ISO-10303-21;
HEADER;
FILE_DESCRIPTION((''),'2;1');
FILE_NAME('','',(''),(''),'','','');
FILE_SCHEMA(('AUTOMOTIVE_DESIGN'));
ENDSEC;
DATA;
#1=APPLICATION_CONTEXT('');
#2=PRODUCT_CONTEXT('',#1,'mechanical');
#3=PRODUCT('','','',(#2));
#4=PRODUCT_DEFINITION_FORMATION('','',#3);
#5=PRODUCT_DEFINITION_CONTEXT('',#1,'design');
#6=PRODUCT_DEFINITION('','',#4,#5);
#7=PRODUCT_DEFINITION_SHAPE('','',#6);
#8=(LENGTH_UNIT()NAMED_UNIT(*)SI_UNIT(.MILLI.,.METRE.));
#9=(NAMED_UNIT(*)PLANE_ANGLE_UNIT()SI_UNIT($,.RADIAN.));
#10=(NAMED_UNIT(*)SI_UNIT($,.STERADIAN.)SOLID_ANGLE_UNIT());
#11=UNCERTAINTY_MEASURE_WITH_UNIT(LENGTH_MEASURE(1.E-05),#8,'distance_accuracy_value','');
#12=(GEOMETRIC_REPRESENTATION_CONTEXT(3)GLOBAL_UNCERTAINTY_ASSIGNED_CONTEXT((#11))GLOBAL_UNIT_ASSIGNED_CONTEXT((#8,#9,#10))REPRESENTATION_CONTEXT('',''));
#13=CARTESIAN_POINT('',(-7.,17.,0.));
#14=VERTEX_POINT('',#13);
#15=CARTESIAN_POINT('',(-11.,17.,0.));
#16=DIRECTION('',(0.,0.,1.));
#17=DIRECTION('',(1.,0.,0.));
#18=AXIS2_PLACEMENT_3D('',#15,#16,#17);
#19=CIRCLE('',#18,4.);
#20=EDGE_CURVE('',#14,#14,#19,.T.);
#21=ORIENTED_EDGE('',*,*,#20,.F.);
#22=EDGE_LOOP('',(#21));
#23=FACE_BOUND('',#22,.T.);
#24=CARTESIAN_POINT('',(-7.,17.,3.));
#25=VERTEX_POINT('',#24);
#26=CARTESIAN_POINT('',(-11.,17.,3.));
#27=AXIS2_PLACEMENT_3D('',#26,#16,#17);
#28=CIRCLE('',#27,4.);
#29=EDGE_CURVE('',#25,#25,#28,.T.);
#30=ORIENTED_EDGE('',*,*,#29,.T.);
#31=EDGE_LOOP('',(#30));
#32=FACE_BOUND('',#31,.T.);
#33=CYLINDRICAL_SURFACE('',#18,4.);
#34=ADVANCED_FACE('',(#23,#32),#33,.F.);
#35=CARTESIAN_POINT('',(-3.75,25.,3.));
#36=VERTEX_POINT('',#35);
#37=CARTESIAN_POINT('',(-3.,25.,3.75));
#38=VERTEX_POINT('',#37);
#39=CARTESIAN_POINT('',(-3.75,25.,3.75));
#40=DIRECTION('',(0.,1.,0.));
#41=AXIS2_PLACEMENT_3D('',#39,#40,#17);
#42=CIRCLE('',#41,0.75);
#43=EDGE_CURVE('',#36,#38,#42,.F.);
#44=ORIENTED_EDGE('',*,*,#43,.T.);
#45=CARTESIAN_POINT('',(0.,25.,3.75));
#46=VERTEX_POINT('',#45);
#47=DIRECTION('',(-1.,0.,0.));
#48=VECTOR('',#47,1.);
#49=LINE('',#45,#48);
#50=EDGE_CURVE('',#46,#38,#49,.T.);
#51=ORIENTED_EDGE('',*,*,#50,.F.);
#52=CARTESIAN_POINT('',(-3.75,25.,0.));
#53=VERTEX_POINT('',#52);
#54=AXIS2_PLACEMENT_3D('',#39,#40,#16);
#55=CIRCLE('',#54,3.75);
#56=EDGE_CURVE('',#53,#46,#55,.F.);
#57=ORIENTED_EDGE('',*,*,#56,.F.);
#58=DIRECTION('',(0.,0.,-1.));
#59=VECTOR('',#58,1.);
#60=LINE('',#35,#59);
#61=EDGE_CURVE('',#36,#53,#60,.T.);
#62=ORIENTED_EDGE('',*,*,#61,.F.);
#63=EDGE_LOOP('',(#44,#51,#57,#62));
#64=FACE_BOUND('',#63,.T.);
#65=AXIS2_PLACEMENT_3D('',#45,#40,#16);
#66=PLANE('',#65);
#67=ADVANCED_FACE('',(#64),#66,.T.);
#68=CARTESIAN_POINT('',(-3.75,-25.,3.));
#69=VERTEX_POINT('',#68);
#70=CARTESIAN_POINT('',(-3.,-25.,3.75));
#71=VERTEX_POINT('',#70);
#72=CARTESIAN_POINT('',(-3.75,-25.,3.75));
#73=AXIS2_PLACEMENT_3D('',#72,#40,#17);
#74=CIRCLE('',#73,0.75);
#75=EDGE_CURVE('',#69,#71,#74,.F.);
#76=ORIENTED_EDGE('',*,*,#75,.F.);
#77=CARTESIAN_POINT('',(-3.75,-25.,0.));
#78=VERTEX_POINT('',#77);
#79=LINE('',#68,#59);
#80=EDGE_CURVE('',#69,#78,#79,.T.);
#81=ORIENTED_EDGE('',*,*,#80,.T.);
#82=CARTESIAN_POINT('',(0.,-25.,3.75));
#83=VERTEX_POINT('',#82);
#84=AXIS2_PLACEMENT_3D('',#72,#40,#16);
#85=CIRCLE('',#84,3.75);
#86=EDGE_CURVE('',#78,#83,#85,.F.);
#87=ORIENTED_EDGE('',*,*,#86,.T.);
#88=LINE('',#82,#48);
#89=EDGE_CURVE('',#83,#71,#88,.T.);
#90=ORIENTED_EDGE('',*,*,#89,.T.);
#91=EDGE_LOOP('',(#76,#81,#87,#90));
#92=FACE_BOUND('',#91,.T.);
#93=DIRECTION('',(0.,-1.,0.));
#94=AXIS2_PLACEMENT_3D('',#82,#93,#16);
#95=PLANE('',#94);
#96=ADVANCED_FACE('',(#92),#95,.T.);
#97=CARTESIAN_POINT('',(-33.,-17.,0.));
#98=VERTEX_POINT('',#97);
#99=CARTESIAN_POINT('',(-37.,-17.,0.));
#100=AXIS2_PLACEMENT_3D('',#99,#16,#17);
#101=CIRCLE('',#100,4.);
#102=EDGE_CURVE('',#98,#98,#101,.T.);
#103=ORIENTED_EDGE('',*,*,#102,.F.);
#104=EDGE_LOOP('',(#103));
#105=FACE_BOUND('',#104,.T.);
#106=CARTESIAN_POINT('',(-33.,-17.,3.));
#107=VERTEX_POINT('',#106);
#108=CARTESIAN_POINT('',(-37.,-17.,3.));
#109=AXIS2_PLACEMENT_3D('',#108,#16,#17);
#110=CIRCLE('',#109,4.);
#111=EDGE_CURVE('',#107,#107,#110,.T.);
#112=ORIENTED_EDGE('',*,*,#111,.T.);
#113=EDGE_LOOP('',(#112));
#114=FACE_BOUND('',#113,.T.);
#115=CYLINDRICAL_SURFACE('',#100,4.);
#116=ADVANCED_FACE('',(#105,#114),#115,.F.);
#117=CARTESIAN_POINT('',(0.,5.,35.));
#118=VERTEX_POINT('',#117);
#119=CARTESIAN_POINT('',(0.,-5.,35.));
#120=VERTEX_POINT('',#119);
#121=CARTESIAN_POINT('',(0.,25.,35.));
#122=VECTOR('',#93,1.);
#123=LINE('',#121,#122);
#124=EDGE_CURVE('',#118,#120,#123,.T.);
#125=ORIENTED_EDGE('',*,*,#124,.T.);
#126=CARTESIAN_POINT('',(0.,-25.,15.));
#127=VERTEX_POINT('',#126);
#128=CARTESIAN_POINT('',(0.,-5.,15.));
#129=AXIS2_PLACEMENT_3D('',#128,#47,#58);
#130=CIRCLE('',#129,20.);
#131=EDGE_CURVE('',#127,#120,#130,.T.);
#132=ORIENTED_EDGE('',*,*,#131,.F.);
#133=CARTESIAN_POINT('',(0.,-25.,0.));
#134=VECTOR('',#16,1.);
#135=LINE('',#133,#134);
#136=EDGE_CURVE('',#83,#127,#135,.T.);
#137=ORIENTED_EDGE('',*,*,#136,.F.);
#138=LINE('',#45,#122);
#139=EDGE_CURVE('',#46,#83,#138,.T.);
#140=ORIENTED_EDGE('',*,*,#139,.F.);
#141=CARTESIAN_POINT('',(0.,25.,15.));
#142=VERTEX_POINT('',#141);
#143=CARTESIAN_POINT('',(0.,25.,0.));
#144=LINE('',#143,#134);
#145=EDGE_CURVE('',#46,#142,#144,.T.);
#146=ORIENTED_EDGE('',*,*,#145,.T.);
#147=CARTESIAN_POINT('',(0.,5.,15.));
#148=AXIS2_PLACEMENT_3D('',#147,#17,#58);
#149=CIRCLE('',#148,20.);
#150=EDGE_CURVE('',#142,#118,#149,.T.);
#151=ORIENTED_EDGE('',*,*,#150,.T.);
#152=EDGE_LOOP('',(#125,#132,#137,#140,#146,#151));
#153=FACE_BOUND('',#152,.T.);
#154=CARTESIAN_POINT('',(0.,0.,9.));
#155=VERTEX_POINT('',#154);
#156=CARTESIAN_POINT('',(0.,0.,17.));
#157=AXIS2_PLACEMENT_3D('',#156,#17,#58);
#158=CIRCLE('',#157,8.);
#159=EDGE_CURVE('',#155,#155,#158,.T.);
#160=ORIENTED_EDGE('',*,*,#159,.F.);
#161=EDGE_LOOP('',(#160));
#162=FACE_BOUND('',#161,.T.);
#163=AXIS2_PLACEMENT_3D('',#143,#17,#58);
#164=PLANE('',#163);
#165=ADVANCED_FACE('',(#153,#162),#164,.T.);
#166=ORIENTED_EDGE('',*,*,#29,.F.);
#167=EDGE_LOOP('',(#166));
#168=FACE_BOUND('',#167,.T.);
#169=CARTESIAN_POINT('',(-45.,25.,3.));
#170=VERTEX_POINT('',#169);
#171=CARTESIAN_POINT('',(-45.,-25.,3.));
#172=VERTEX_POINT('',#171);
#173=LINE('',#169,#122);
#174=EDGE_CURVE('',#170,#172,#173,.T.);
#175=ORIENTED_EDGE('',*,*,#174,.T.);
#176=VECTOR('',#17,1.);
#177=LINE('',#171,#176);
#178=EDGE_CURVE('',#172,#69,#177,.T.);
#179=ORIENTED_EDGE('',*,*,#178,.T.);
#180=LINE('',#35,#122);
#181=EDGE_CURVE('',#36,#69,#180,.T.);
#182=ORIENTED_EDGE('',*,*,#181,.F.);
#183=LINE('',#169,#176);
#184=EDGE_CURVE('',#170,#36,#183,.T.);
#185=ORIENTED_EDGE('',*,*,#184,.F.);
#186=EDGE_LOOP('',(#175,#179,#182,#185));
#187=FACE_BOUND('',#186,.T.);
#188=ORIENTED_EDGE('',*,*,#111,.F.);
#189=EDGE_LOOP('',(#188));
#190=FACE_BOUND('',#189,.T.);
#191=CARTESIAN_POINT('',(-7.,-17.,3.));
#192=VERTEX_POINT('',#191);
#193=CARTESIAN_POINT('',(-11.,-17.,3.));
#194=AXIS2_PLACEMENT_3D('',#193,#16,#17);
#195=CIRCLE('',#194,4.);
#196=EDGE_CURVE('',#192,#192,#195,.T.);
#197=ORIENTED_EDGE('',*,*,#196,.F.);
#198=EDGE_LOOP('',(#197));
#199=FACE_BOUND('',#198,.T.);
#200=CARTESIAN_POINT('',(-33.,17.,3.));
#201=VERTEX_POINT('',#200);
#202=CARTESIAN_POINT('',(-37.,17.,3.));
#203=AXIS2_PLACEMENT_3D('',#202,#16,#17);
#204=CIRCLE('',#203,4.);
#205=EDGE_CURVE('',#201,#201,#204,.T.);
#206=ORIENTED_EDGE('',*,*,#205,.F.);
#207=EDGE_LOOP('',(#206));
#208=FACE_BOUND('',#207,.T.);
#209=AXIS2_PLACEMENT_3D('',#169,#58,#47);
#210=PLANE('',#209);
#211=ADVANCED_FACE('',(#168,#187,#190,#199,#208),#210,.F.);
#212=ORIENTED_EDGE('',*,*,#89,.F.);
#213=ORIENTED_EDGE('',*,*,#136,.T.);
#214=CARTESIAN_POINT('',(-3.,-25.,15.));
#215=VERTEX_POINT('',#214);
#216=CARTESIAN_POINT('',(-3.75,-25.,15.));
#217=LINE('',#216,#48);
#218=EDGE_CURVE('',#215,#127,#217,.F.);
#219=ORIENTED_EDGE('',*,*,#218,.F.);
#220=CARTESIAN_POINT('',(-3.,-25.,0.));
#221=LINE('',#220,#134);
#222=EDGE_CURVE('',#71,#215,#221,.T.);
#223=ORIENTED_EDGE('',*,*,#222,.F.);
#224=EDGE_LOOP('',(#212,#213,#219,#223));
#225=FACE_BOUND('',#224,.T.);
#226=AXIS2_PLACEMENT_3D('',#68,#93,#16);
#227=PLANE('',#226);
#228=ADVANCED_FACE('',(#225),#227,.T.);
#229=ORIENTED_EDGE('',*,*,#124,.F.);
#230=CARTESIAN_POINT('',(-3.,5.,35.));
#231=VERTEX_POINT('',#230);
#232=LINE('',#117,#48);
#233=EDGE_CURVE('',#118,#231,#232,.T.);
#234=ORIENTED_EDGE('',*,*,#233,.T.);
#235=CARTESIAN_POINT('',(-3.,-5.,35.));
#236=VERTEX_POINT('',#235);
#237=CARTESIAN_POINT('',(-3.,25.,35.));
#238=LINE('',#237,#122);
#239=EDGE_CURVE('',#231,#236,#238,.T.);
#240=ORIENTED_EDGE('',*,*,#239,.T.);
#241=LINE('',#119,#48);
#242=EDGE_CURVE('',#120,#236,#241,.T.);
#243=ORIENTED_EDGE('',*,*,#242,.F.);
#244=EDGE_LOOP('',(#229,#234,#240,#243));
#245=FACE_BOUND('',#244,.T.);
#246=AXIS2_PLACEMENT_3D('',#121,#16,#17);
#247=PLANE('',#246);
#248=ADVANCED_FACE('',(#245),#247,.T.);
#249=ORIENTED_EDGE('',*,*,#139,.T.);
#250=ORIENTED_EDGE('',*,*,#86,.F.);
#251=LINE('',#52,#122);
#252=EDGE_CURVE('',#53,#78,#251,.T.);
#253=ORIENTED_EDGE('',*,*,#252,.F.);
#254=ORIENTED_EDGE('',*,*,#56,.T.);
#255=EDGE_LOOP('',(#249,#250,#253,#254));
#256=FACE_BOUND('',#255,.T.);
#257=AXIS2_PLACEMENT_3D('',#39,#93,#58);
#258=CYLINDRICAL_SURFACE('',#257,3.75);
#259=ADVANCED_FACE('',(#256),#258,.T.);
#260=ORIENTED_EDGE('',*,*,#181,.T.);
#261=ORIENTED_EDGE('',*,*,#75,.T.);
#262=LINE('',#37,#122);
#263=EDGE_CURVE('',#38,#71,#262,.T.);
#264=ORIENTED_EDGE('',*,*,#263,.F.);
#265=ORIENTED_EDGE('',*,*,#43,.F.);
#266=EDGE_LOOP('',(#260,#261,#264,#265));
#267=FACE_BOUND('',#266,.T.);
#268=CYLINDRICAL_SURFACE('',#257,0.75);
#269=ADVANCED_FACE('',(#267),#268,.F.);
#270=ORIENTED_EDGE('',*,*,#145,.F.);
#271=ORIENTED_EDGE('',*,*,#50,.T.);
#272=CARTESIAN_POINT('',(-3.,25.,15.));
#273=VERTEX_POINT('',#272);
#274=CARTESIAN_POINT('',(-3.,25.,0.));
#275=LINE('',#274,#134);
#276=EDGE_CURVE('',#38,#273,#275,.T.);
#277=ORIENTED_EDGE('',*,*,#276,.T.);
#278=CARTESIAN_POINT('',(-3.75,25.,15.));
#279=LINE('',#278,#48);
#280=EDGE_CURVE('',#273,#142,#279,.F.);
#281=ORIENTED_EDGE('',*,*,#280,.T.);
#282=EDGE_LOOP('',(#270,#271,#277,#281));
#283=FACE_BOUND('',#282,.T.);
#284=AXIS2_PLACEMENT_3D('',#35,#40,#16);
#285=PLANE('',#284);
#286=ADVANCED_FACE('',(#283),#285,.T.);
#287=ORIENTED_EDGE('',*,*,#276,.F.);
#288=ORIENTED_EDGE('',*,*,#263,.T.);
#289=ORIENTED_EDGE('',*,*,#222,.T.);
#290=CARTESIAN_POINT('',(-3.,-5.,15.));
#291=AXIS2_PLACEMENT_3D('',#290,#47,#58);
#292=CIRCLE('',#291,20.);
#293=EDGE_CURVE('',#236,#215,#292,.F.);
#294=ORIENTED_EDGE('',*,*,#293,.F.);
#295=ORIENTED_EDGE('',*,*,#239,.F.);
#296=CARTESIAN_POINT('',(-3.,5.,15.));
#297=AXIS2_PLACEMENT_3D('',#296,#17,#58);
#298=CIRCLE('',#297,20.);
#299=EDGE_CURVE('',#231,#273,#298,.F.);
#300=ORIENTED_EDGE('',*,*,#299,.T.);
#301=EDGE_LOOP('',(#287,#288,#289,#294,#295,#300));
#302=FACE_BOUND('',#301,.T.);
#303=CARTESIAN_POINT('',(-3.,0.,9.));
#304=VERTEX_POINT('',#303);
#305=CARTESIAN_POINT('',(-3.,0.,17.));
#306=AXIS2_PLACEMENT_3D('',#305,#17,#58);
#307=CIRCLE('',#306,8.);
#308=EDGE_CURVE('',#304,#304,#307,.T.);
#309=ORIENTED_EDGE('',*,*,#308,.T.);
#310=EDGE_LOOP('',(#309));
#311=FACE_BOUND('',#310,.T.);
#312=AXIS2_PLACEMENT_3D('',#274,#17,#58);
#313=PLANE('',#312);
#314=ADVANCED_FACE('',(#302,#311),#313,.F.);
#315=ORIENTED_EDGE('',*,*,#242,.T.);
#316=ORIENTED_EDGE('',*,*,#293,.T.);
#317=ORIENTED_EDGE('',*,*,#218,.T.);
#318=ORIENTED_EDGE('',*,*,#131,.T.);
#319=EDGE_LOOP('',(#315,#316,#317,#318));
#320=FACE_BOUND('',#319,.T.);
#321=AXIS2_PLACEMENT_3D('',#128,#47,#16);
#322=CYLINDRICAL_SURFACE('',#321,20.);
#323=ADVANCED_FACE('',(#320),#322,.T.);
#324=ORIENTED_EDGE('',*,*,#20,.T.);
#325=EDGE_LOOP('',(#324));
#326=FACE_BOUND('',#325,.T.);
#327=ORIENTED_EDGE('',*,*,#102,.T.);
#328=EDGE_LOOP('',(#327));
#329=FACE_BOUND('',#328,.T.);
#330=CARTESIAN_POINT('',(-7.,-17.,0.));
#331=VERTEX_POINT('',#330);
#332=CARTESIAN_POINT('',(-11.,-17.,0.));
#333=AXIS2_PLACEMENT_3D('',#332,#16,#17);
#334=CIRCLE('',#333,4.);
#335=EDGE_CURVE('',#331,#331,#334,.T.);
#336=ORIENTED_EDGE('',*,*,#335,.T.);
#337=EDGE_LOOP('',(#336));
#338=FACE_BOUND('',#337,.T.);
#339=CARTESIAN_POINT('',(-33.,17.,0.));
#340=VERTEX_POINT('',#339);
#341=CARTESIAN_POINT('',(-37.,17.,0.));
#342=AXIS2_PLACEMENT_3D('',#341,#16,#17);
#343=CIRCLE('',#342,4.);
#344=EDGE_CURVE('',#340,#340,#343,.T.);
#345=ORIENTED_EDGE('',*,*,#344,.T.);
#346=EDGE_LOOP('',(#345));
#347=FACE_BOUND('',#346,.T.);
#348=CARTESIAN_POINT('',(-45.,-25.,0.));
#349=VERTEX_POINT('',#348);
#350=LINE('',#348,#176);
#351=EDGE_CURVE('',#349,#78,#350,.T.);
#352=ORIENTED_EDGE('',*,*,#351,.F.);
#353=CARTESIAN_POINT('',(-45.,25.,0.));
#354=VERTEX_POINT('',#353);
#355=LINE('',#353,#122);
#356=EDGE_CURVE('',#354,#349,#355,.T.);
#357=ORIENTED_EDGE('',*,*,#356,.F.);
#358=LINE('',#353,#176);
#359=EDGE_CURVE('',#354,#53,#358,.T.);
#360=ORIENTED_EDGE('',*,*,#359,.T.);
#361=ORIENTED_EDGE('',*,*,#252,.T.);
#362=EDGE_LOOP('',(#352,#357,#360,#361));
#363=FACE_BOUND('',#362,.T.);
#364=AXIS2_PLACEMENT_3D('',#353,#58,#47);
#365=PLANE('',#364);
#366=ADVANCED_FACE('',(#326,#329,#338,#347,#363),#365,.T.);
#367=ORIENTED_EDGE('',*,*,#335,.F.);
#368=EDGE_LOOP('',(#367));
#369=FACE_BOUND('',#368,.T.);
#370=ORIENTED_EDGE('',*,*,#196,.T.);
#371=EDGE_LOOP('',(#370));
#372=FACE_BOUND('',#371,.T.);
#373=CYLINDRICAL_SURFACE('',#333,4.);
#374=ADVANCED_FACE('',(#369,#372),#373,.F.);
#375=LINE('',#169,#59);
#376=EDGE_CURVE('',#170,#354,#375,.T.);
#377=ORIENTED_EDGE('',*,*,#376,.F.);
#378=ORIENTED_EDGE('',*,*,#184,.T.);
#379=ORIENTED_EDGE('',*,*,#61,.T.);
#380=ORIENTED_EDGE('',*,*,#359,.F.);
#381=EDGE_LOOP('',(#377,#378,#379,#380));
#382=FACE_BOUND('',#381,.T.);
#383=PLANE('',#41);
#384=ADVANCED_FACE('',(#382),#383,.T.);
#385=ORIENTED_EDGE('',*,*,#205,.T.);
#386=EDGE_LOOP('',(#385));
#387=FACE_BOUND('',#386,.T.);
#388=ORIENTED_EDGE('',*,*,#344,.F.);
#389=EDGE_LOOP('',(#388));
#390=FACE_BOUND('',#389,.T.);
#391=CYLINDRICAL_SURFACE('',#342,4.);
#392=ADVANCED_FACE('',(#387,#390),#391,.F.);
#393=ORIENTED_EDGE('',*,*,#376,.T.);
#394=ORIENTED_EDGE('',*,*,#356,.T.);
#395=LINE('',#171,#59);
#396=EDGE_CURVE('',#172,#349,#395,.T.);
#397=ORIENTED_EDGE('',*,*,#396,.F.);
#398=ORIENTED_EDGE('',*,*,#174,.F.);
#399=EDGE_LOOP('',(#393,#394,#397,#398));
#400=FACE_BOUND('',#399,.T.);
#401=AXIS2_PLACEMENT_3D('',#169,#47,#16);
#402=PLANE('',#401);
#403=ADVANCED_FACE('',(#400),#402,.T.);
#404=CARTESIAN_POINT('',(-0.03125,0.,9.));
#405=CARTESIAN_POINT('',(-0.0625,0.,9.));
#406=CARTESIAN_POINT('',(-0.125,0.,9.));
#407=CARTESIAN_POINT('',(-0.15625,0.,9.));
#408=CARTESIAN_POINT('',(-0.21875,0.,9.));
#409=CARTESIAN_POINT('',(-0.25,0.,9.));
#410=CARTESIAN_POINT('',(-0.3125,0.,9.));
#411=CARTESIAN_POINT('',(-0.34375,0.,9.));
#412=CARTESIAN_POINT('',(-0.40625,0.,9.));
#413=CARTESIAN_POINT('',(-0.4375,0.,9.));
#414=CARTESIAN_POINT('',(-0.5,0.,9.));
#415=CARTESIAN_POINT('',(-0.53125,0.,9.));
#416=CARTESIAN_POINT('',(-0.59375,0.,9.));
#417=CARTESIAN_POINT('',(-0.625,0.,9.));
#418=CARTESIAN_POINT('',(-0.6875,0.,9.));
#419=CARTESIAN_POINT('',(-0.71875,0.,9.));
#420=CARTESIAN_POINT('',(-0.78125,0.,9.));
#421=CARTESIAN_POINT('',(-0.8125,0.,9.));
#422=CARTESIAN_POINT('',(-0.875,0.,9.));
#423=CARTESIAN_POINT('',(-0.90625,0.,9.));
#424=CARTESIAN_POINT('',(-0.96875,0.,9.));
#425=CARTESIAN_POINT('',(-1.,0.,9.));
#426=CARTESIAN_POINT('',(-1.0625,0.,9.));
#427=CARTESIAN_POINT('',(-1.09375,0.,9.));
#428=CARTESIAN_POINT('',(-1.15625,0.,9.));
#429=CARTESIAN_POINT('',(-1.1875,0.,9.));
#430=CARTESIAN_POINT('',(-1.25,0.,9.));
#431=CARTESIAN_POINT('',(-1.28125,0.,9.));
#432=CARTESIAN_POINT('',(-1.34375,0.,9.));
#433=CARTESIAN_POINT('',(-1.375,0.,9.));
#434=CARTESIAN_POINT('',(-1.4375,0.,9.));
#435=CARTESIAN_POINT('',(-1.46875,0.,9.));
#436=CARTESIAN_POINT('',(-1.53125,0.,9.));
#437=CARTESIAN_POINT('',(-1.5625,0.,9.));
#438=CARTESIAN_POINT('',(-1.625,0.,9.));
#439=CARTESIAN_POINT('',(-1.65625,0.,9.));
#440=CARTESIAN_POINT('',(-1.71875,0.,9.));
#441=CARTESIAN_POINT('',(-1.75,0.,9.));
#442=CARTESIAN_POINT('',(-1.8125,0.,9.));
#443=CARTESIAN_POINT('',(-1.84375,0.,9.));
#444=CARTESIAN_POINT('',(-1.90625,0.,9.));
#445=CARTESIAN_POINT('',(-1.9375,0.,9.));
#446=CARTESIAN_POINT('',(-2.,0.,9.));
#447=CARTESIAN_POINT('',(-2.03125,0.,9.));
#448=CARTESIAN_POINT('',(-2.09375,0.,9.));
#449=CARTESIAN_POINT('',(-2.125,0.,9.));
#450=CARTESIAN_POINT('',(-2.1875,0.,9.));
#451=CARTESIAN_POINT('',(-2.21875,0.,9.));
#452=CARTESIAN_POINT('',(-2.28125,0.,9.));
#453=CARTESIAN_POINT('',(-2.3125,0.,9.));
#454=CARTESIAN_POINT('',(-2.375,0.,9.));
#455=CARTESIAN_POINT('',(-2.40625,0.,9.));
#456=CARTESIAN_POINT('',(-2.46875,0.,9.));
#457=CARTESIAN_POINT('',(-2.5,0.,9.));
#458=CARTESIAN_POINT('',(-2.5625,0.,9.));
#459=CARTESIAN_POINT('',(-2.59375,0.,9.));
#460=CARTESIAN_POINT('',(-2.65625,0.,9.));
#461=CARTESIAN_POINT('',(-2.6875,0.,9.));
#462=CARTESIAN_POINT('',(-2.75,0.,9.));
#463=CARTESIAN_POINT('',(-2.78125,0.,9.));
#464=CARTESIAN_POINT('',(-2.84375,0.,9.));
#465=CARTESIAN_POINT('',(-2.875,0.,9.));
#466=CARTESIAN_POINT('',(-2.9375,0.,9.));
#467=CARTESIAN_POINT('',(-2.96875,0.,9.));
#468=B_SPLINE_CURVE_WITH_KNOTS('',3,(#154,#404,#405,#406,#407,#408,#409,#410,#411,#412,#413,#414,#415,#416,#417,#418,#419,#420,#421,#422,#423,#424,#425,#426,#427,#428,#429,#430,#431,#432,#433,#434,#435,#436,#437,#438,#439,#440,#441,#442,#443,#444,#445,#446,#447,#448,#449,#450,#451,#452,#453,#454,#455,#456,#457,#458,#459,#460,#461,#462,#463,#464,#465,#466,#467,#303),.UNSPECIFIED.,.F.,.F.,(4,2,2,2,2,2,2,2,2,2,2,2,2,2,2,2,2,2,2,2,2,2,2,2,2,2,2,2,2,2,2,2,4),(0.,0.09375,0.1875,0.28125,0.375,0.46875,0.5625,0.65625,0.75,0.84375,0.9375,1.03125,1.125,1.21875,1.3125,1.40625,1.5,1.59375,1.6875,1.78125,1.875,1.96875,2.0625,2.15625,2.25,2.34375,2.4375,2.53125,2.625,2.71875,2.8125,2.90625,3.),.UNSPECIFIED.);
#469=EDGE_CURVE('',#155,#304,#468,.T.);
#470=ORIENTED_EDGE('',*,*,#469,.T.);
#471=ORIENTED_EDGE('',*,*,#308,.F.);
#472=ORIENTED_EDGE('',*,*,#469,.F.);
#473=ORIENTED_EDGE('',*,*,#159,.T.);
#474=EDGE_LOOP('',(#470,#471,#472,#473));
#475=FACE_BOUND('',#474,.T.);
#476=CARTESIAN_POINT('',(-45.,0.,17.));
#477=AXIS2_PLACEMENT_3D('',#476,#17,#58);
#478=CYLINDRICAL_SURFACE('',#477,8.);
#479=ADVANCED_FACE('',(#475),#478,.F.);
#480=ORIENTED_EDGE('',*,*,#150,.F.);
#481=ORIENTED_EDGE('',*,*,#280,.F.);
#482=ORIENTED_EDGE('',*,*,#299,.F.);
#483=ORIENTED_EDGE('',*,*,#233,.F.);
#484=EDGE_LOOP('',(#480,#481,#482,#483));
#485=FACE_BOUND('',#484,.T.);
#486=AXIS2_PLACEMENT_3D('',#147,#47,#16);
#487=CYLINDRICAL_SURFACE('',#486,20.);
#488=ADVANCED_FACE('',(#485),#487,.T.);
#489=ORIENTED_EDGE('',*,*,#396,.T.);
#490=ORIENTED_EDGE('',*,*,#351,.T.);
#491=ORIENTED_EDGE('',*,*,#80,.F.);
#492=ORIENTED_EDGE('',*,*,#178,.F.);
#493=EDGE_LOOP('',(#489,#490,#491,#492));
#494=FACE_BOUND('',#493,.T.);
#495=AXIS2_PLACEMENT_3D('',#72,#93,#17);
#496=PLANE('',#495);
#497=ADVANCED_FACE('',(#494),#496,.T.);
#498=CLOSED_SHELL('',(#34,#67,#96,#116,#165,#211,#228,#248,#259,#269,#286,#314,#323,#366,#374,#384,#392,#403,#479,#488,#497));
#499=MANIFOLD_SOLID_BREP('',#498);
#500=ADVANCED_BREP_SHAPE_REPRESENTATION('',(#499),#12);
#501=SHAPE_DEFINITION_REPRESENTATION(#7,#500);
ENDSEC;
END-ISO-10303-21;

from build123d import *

# Parameters (mm, degrees)
SM_BASE_FLANGE_1_DEPTH = 25
FILLET_1_R             = 20
SKETCH_8_R             = 8
CUT_EXTRUDE_1_DEPTH    = 63.24949799
SKETCH_9_R             = 4
CUT_EXTRUDE_2_DEPTH    = 61.613529843


# Sheet-metal steps are written as plain solids
with BuildPart() as part:
    # Sketch 1 → Базовая кромка1 (new body)
    with BuildSketch(Plane(origin=(0, 0, 0), x_dir=(1, 0, 0), z_dir=(0, 1, 0))):
        with BuildLine():
            Line((-45, 0), (-3.75, 0))
            ThreePointArc((-3.75, 0), (-1.098349571, -1.098349571), (0, -3.75))
            Line((0, -3.75), (0, -35))
            Line((0, -35), (-3, -35))
            Line((-3, -35), (-3, -3.75))
            ThreePointArc((-3, -3.75), (-3.219669914, -3.219669914), (-3.75, -3))
            Line((-3.75, -3), (-45, -3))
            Line((-45, -3), (-45, 0))
        make_face()
    extrude(amount=SM_BASE_FLANGE_1_DEPTH)

    # Скругление1
    fillet_1_edges = [part.edges().sort_by_distance(p)[0] for p in [
        (-1.5, 25, 35),
    ]]
    fillet(fillet_1_edges, radius=FILLET_1_R)

    # Зеркальное отражение1: part across plane


with BuildPart() as part_1:
    add(part.part)
    add(part.part.mirror(Plane(origin=(-3.75, 0, 3.75), x_dir=(0, 0, 1), z_dir=(0, 1, 0))))

    # Эскиз8 → Вырез-Вытянуть1 (cut, through all)
    with BuildSketch(Plane(origin=(0, 0, 0), x_dir=(0, 0, -1), z_dir=(1, 0, 0))):
        with Locations((-17, 0)):
            Circle(SKETCH_8_R)
    extrude(amount=-CUT_EXTRUDE_1_DEPTH, mode=Mode.SUBTRACT)

    # Эскиз9 → Вырез-Вытянуть2 (cut, through all)
    with BuildSketch(Plane.XY.offset(3)):
        with Locations((-37, 17)):
            Circle(SKETCH_9_R)
        with Locations((-11, 17)):
            Circle(SKETCH_9_R)
        with Locations((-11, -17)):
            Circle(SKETCH_9_R)
        with Locations((-37, -17)):
            Circle(SKETCH_9_R)
    extrude(amount=-CUT_EXTRUDE_2_DEPTH, mode=Mode.SUBTRACT)


solid = part_1.part
